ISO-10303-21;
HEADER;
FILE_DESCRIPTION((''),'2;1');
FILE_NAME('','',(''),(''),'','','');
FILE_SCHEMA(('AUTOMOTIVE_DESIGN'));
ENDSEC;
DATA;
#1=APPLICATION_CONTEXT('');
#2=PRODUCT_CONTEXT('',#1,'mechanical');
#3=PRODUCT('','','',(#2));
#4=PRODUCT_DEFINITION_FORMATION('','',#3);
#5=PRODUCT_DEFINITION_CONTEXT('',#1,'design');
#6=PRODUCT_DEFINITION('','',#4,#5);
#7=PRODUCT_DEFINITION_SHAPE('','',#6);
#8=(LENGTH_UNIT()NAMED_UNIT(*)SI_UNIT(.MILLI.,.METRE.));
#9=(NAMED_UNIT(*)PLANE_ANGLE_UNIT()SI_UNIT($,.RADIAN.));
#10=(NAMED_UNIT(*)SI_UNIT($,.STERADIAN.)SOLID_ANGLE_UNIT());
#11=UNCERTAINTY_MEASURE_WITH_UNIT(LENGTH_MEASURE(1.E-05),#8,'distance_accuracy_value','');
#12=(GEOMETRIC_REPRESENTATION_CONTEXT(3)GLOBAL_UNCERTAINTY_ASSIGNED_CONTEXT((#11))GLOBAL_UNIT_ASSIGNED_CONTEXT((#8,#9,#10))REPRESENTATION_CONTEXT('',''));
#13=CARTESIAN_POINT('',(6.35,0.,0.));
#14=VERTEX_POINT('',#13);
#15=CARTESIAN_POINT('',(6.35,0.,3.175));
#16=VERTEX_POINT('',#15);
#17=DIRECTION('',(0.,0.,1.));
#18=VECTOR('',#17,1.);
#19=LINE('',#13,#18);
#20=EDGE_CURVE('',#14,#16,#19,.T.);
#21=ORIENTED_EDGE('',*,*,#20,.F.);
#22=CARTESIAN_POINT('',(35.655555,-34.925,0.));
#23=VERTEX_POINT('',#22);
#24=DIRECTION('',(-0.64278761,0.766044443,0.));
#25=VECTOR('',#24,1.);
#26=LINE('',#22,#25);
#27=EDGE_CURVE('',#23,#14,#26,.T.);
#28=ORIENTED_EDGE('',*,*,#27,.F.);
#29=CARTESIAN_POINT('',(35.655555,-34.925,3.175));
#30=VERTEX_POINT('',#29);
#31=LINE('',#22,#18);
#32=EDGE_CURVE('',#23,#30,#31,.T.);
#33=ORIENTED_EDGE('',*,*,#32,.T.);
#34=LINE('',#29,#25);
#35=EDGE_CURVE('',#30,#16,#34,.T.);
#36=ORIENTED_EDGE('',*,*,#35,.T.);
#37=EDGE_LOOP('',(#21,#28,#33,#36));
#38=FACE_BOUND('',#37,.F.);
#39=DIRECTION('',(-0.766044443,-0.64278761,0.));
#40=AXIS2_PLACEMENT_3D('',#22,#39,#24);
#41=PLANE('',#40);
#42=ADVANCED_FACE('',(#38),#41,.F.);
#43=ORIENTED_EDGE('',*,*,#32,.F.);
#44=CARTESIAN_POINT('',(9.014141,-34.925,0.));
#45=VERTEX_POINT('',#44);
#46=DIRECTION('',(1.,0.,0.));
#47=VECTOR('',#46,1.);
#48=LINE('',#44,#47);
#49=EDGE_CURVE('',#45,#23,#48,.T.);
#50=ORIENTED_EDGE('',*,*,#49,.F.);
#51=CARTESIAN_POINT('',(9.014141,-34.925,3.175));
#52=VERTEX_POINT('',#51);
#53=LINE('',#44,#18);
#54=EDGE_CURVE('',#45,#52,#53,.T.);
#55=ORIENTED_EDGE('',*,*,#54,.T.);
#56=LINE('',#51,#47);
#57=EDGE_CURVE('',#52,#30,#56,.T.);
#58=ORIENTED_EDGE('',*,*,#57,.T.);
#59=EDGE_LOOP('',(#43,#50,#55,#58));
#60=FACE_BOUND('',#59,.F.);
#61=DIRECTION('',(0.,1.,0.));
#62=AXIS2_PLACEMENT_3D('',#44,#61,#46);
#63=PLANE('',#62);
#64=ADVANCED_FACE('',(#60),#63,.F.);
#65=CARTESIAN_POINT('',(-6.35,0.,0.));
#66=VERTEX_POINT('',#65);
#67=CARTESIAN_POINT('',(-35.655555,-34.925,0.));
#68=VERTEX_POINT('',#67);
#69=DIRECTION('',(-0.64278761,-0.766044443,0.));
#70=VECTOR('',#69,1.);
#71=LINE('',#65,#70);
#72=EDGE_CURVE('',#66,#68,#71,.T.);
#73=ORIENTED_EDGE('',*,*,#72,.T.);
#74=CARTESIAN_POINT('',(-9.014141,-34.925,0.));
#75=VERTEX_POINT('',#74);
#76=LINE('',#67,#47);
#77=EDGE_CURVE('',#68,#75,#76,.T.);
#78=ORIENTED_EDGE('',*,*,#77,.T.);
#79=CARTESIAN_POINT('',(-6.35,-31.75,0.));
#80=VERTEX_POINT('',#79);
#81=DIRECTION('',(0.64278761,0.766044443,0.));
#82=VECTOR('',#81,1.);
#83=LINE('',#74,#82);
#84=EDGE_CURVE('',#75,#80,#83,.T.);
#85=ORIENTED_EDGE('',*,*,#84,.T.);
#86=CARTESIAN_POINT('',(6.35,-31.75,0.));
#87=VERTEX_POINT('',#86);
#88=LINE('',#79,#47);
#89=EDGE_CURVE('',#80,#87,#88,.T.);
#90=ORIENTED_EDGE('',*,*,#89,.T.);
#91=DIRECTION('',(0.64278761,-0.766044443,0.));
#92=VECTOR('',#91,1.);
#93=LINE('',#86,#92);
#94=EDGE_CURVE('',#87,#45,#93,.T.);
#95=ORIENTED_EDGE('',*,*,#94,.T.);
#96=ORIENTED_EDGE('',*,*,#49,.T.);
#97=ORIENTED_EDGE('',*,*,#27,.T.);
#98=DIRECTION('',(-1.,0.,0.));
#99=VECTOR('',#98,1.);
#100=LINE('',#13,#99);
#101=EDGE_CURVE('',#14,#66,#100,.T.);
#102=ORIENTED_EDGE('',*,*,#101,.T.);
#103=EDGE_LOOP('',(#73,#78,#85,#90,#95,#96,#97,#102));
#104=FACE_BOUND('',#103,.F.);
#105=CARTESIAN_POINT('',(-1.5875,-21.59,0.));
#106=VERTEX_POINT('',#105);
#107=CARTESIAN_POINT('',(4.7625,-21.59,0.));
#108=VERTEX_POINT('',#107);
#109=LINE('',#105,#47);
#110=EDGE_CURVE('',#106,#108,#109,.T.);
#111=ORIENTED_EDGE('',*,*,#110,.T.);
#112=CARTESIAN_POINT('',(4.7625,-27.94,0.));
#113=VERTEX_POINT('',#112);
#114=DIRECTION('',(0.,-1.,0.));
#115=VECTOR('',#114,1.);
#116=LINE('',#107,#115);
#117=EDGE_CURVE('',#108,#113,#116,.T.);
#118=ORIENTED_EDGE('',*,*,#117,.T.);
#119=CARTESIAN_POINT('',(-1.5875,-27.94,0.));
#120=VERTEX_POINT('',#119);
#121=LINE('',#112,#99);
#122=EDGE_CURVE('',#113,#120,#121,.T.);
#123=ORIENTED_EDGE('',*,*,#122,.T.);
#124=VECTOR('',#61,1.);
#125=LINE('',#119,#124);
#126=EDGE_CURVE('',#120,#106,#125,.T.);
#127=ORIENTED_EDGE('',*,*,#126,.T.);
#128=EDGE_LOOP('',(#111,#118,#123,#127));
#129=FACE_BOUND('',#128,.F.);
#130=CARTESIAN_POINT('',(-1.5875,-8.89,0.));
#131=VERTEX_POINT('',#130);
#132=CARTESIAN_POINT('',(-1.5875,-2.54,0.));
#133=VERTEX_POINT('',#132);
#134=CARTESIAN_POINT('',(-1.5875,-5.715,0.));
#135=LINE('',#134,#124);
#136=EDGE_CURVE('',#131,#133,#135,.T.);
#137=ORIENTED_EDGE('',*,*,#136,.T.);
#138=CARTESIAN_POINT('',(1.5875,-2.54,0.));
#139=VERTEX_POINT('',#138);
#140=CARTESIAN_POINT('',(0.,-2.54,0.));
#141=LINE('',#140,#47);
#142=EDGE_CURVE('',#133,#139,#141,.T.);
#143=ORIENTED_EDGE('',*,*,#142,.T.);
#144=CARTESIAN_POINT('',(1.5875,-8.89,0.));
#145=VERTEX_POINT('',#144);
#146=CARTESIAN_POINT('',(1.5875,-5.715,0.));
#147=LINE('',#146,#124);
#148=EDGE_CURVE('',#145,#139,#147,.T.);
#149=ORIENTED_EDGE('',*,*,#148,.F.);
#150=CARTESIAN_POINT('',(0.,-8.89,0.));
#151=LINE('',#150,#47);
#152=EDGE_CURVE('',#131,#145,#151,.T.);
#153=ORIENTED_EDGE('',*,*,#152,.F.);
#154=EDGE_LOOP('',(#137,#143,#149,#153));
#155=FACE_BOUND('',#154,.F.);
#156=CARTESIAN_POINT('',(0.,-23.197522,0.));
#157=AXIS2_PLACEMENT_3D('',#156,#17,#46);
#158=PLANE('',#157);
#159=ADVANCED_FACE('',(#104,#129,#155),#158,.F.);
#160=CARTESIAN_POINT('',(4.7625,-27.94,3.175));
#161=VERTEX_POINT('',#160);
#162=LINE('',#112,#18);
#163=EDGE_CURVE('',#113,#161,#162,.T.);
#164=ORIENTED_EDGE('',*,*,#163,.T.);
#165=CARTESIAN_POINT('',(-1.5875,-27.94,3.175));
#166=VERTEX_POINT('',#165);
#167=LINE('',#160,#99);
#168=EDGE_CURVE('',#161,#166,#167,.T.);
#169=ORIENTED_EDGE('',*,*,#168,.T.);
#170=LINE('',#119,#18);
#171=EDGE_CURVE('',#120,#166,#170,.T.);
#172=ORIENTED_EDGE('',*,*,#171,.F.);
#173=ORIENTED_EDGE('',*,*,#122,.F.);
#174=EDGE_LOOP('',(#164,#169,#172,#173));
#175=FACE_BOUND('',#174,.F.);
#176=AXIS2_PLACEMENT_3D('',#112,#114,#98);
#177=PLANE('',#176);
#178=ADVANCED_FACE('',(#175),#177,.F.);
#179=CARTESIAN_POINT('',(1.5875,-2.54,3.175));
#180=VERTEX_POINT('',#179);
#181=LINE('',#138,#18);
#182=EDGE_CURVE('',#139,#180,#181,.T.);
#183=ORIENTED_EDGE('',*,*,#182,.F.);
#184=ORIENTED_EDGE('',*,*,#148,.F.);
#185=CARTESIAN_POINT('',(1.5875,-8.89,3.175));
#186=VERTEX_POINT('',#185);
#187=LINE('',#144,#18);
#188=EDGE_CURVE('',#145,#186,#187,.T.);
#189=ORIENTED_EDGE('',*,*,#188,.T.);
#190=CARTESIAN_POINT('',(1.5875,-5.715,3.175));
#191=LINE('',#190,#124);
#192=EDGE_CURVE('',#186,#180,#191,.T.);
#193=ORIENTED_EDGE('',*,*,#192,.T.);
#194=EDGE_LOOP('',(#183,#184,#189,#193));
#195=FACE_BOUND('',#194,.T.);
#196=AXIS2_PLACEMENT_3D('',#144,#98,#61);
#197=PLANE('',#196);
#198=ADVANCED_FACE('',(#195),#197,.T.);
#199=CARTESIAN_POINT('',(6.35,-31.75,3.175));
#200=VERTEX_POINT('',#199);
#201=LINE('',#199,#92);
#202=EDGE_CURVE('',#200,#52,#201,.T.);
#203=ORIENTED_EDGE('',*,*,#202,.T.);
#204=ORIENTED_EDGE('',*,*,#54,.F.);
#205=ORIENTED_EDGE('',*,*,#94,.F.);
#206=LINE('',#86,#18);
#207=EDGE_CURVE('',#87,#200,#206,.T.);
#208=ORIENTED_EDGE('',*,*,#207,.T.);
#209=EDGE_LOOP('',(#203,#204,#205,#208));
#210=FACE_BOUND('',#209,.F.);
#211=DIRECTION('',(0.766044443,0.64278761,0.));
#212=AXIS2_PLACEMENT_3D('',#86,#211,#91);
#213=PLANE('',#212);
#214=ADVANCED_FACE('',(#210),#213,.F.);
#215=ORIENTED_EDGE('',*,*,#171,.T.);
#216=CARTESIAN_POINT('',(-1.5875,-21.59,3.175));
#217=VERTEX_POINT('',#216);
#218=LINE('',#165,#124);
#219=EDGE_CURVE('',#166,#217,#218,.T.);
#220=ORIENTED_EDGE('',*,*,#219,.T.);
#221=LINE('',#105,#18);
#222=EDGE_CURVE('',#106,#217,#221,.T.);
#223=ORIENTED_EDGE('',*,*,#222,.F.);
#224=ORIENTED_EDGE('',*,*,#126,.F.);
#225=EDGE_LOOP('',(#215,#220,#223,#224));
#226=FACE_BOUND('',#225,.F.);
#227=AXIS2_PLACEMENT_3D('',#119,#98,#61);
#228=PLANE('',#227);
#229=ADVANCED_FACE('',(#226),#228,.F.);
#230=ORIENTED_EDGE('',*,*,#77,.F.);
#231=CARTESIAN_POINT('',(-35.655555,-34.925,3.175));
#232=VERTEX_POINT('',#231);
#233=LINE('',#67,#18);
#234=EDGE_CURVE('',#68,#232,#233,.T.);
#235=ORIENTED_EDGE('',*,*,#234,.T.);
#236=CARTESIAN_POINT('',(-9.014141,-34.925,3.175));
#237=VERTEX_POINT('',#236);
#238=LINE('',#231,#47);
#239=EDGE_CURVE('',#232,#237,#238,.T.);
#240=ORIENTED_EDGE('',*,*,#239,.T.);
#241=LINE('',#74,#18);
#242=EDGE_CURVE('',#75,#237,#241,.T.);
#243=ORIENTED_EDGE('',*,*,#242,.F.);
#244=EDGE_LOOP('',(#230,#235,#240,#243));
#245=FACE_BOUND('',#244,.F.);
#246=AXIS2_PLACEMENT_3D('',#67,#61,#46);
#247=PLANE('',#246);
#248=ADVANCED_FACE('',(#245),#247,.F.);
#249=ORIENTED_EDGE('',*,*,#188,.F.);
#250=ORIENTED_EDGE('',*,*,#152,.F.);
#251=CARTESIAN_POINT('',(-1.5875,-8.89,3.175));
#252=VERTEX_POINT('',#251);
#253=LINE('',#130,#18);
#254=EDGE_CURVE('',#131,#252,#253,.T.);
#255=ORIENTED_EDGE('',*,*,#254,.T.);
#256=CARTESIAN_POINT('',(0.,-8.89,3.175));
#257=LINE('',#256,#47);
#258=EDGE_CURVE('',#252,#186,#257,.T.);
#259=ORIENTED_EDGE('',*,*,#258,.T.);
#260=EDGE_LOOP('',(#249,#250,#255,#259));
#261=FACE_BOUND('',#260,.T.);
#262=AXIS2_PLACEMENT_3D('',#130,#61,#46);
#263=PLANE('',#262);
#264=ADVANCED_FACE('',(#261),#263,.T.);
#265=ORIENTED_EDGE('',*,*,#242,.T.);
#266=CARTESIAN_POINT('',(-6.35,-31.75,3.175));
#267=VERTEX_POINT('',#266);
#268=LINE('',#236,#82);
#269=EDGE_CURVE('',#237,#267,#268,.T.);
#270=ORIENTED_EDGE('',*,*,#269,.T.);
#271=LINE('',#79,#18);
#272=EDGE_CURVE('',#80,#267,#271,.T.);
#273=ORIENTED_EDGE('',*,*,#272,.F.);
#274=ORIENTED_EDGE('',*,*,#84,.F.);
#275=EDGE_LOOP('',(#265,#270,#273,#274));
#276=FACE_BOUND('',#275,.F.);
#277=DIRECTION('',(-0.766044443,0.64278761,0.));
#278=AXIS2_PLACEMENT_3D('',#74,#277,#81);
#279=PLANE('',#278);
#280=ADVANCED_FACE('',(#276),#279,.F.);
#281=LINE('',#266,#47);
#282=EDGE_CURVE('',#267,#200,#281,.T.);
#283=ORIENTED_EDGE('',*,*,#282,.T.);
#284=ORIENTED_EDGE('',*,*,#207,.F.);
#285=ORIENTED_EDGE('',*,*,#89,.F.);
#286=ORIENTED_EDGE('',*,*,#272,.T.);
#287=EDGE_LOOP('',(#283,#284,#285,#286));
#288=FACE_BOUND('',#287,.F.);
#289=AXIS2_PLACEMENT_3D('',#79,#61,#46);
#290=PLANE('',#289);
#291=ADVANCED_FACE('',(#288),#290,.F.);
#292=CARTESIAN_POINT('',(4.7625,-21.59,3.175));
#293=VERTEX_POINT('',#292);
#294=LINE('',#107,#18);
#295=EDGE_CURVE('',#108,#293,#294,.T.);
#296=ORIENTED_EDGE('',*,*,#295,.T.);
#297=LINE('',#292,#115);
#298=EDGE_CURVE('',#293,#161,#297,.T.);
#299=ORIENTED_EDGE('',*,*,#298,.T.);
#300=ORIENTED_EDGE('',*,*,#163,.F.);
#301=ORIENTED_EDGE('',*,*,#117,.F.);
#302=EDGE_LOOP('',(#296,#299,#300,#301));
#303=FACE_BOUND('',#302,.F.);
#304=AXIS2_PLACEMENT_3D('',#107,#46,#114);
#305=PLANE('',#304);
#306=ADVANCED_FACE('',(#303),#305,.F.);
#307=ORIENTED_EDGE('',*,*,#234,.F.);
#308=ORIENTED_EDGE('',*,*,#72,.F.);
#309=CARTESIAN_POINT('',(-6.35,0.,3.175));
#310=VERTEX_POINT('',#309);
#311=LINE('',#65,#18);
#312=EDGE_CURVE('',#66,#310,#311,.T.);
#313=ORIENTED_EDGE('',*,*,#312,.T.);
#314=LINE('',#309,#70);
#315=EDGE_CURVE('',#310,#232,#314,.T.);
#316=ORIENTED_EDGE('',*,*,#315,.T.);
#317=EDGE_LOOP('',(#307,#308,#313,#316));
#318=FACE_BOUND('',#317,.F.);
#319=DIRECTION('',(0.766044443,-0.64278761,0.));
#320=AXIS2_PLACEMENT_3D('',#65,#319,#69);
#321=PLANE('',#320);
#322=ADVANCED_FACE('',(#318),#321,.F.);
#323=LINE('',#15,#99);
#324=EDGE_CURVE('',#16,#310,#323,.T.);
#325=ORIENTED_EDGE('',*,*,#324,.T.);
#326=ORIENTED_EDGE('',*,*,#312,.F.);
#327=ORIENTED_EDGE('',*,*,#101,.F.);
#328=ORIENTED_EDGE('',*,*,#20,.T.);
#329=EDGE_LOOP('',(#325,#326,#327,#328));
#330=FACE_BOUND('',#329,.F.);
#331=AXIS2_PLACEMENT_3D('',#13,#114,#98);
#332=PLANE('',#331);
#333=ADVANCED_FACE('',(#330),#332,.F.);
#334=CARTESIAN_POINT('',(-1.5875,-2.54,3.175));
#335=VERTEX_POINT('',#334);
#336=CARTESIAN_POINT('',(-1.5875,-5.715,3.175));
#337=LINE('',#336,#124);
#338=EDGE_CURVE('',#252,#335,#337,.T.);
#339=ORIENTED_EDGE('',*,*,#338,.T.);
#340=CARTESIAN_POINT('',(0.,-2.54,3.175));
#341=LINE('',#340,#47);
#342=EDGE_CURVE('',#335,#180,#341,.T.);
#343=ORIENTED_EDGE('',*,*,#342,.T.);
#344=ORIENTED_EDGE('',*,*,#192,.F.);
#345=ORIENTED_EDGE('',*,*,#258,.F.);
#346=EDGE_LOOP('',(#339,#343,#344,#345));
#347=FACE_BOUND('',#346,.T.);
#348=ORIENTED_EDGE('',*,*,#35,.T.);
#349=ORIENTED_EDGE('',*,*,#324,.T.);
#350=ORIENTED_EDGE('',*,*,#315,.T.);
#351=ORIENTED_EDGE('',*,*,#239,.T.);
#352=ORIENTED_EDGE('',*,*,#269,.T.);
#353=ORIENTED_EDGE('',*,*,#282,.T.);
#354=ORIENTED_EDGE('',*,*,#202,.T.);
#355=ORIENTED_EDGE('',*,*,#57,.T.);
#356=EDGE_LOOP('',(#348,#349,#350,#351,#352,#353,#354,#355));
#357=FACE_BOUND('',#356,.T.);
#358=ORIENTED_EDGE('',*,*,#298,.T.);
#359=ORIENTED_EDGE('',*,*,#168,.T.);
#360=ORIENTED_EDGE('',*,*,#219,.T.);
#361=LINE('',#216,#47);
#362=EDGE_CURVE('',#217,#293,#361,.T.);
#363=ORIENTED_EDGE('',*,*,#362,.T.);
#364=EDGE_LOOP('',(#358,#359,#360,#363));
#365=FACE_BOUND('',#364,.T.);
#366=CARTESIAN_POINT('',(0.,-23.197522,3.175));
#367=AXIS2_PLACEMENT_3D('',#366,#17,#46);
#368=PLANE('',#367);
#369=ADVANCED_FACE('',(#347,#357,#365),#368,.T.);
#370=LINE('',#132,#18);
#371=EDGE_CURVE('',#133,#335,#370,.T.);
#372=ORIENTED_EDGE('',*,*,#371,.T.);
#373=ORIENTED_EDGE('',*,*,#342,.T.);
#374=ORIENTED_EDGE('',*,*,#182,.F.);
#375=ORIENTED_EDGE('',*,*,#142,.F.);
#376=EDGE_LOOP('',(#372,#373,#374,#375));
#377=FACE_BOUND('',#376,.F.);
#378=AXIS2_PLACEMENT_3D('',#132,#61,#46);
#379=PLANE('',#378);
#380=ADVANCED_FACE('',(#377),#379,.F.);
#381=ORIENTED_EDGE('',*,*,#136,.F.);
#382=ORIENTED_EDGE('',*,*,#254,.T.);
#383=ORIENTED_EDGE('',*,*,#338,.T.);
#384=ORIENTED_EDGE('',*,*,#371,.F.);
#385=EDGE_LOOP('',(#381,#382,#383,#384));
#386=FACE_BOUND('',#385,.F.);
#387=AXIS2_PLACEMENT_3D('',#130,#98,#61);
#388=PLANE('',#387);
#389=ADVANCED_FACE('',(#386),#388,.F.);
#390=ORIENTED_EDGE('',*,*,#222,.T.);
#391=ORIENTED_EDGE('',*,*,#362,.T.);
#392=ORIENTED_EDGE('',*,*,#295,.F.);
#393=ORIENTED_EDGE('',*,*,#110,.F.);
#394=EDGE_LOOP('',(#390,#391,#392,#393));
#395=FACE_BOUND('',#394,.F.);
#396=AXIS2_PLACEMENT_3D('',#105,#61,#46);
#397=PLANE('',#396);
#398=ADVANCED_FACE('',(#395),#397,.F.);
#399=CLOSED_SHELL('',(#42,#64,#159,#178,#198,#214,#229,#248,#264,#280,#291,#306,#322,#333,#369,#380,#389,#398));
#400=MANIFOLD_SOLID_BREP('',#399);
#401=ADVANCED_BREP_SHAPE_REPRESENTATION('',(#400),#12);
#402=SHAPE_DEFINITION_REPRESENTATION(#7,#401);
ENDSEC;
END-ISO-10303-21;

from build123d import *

# Parameters (mm, degrees)
F0_W     = 3.175
F0_H     = 6.35
F1_DEPTH = 3.175


# Not quite as in the source:
# - a length typed as a fraction of an inch, garbled in the dataset ("3 / 203.2 mm" for 3/8 in), is restored


with BuildPart() as f1:
    # F0 (on Top) → F1 (new body)
    with BuildSketch(Plane.XY):
        Polygon((6.35, 0), (-6.35, 0), (-35.6555546189, -34.925), (-9.014141329, -34.925), (-6.35, -31.75), (6.35, -31.75), (9.014141329, -34.925), (35.6555546189, -34.925), align=None)
        Polygon((-1.5875, -27.94), (-1.5875, -21.59), (1.5875, -21.59), (4.7625, -21.59), (4.7625, -27.94), (1.5875, -27.94), align=None, mode=Mode.SUBTRACT)
        with Locations((0, -5.715)):
            Rectangle(F0_W, F0_H, mode=Mode.SUBTRACT)
    extrude(amount=F1_DEPTH)


solid = f1.part
